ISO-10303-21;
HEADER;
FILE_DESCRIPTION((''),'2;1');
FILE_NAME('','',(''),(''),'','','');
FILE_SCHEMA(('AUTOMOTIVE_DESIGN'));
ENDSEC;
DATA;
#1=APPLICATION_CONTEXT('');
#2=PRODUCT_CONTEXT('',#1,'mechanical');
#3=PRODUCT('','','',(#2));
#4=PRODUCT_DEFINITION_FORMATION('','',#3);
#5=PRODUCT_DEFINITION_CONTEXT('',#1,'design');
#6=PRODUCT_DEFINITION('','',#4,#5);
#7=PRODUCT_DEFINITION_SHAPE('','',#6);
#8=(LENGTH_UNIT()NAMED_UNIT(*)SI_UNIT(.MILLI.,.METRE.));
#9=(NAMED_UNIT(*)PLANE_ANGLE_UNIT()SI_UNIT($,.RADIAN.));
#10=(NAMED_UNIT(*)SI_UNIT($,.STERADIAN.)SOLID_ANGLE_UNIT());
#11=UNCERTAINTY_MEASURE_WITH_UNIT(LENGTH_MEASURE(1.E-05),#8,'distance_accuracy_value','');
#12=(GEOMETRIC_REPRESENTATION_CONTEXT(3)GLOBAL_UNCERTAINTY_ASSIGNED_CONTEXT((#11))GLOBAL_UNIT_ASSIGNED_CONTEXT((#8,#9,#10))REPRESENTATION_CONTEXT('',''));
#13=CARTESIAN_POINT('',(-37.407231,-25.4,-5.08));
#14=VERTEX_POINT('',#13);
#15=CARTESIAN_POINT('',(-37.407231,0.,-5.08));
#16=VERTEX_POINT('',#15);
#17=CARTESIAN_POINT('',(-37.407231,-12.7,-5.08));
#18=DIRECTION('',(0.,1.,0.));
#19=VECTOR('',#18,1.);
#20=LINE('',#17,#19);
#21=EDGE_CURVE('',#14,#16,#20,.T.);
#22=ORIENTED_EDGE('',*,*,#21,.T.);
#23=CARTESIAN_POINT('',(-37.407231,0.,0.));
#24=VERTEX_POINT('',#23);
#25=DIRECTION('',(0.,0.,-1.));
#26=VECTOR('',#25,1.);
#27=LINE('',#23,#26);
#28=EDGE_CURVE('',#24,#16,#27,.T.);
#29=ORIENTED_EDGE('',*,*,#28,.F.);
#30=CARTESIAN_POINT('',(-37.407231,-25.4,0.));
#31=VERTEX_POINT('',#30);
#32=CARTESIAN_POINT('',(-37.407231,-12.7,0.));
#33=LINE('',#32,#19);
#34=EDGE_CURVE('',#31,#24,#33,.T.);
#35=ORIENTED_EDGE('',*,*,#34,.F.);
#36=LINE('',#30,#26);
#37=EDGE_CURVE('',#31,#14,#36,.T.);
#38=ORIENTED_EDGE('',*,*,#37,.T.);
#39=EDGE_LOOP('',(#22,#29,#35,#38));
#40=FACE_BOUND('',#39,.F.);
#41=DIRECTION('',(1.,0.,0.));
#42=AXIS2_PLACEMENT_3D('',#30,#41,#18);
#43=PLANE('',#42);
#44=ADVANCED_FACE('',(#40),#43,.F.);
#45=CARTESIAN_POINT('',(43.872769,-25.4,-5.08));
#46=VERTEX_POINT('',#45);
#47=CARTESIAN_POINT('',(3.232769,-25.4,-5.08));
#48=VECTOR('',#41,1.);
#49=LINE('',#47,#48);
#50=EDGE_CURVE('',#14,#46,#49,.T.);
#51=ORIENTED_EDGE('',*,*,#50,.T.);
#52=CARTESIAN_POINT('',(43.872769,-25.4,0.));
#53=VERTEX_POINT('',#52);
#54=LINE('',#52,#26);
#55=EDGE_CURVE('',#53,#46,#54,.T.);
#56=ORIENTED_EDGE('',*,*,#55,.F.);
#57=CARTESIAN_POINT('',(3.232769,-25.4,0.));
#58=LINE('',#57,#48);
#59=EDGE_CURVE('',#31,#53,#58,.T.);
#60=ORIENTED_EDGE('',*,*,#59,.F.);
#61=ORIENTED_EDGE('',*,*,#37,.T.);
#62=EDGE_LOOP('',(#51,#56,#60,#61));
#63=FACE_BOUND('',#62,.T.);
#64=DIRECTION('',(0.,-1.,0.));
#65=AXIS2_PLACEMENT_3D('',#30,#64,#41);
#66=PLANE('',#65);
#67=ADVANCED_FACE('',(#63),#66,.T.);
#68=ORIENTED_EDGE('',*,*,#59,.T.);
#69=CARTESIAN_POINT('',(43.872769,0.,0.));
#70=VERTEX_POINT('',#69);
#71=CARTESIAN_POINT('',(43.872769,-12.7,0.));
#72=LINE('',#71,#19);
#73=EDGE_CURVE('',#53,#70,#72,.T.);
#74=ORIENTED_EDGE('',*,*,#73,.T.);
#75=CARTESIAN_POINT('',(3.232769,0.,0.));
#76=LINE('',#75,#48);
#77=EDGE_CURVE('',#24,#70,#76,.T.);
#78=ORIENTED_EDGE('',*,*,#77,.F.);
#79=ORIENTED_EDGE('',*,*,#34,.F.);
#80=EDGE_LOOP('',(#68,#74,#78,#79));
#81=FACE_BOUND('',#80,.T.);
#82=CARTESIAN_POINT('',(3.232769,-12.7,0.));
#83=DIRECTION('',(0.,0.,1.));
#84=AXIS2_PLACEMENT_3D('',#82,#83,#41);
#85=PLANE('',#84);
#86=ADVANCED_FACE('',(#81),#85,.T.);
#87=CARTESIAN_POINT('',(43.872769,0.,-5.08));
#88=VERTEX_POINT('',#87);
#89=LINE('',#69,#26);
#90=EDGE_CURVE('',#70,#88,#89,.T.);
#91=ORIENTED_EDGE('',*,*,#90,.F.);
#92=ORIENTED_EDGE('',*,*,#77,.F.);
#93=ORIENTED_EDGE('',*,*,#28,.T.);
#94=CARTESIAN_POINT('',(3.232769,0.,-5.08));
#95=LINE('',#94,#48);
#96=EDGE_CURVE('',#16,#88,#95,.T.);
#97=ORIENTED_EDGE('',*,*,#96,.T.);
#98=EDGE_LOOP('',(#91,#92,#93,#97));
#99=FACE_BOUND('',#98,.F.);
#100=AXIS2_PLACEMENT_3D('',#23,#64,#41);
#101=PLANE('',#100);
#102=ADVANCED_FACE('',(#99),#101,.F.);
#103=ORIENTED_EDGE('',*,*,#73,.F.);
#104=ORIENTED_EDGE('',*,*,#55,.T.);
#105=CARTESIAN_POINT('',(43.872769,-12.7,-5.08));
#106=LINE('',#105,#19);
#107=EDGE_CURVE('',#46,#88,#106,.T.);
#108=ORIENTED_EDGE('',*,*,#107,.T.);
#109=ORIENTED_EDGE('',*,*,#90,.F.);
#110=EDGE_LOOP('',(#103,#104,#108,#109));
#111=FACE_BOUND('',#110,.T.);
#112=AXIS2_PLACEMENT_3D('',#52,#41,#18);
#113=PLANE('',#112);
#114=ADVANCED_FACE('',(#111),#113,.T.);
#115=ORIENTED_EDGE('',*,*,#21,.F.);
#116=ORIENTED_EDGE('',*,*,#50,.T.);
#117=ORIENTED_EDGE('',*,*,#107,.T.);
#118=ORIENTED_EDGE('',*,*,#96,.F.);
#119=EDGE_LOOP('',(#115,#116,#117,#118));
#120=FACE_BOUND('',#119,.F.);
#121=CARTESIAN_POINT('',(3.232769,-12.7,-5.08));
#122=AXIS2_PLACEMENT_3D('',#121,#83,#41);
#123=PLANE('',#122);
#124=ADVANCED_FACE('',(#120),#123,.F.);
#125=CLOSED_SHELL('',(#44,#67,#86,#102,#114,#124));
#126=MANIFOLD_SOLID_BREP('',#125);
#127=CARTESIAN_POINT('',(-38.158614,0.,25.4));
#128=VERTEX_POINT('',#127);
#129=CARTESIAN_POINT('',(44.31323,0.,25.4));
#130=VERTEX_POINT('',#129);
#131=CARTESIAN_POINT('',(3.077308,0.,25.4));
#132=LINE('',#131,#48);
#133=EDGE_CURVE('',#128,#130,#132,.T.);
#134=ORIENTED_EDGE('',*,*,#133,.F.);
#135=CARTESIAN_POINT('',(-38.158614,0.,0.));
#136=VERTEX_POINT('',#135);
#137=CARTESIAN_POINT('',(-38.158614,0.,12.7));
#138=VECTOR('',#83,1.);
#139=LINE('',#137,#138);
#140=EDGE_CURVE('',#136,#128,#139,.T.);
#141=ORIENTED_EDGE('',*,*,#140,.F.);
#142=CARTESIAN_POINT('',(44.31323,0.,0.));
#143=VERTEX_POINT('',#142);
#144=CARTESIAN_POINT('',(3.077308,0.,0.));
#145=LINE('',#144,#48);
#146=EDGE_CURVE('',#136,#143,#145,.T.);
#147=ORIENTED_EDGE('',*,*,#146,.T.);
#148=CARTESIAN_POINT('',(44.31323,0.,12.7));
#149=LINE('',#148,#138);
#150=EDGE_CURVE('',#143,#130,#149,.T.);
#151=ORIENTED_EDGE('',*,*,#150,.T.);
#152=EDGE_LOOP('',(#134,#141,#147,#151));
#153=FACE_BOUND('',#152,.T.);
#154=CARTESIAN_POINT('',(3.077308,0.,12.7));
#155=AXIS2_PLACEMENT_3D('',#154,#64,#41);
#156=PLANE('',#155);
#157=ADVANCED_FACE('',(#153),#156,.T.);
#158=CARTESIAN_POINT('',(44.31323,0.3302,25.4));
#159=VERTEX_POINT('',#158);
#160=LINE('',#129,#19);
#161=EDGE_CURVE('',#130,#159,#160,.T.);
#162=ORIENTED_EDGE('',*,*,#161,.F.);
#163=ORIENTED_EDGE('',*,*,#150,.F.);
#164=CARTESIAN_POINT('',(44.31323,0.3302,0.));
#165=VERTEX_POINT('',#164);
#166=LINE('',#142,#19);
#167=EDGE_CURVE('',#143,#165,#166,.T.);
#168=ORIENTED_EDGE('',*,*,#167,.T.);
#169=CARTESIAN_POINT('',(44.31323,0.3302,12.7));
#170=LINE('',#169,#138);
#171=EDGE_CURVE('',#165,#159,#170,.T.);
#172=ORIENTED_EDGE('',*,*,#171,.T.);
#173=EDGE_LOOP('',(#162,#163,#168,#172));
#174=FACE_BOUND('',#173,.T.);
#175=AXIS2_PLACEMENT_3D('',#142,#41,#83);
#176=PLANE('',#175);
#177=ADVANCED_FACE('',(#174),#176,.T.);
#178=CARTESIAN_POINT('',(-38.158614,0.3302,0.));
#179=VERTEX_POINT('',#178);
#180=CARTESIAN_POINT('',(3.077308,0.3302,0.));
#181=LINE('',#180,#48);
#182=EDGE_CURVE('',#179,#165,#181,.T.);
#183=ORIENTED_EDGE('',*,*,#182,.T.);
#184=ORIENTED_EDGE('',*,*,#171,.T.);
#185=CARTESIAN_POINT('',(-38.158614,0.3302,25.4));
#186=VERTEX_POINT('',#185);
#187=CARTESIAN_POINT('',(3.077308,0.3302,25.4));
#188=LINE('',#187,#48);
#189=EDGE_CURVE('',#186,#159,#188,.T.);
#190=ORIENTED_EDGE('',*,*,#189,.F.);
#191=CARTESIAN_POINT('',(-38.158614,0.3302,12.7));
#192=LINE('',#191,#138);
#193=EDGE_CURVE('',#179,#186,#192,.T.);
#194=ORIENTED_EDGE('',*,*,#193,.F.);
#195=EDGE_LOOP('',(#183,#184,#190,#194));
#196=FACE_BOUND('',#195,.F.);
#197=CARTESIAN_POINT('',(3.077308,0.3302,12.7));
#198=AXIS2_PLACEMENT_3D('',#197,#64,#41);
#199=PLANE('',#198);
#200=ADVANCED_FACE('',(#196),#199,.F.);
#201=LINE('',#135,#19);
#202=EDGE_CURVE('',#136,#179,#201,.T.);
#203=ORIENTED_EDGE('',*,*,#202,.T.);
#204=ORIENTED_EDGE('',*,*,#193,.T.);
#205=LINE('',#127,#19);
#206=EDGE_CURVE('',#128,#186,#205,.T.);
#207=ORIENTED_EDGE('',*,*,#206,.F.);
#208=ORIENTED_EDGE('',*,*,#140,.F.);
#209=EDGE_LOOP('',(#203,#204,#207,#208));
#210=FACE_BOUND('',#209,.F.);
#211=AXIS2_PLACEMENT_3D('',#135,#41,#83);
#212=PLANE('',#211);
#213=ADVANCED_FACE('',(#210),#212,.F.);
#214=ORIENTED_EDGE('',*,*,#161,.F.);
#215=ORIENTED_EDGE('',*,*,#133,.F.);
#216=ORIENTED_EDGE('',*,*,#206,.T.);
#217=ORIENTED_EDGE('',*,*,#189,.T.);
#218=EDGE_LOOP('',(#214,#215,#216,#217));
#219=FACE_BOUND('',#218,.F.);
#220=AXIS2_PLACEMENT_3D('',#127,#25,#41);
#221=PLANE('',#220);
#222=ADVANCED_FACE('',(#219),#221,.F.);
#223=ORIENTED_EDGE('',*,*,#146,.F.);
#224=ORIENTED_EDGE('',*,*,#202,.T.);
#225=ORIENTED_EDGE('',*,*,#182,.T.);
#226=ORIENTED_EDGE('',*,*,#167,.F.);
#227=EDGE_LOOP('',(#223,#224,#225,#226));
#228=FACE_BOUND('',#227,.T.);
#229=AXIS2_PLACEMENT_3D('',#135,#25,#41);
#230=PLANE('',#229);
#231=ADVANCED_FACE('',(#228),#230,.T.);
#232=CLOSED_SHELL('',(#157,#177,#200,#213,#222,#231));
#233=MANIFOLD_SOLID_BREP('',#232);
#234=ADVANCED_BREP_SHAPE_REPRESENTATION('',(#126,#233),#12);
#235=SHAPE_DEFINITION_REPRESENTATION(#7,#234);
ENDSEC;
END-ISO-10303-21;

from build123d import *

# Parameters (mm, degrees)
F0_W     = 82.4718438089
F0_H     = 25.4
F1_DEPTH = 0.3302
F4_W     = 81.28
F4_H     = 25.4
F5_DEPTH = 5.08


# Not quite as in the source:
# - the program builds the solid bodies; features that only make, move or delete a surface that nothing else refers to are left out


with BuildPart() as f1:
    # F0 (on Front) → F1 (new body)
    with BuildSketch(Plane.XZ):
        with Locations((3.077307716, 12.7)):
            Rectangle(F0_W, F0_H)
    extrude(amount=-F1_DEPTH)


with BuildPart() as f5:
    # F4 (on Top) → F5 (new body)
    with BuildSketch(Plane.XY):
        with Locations((3.2327694142, -12.7)):
            Rectangle(F4_W, F4_H)
    extrude(amount=-F5_DEPTH)


solid = Compound([f1.part, f5.part])
